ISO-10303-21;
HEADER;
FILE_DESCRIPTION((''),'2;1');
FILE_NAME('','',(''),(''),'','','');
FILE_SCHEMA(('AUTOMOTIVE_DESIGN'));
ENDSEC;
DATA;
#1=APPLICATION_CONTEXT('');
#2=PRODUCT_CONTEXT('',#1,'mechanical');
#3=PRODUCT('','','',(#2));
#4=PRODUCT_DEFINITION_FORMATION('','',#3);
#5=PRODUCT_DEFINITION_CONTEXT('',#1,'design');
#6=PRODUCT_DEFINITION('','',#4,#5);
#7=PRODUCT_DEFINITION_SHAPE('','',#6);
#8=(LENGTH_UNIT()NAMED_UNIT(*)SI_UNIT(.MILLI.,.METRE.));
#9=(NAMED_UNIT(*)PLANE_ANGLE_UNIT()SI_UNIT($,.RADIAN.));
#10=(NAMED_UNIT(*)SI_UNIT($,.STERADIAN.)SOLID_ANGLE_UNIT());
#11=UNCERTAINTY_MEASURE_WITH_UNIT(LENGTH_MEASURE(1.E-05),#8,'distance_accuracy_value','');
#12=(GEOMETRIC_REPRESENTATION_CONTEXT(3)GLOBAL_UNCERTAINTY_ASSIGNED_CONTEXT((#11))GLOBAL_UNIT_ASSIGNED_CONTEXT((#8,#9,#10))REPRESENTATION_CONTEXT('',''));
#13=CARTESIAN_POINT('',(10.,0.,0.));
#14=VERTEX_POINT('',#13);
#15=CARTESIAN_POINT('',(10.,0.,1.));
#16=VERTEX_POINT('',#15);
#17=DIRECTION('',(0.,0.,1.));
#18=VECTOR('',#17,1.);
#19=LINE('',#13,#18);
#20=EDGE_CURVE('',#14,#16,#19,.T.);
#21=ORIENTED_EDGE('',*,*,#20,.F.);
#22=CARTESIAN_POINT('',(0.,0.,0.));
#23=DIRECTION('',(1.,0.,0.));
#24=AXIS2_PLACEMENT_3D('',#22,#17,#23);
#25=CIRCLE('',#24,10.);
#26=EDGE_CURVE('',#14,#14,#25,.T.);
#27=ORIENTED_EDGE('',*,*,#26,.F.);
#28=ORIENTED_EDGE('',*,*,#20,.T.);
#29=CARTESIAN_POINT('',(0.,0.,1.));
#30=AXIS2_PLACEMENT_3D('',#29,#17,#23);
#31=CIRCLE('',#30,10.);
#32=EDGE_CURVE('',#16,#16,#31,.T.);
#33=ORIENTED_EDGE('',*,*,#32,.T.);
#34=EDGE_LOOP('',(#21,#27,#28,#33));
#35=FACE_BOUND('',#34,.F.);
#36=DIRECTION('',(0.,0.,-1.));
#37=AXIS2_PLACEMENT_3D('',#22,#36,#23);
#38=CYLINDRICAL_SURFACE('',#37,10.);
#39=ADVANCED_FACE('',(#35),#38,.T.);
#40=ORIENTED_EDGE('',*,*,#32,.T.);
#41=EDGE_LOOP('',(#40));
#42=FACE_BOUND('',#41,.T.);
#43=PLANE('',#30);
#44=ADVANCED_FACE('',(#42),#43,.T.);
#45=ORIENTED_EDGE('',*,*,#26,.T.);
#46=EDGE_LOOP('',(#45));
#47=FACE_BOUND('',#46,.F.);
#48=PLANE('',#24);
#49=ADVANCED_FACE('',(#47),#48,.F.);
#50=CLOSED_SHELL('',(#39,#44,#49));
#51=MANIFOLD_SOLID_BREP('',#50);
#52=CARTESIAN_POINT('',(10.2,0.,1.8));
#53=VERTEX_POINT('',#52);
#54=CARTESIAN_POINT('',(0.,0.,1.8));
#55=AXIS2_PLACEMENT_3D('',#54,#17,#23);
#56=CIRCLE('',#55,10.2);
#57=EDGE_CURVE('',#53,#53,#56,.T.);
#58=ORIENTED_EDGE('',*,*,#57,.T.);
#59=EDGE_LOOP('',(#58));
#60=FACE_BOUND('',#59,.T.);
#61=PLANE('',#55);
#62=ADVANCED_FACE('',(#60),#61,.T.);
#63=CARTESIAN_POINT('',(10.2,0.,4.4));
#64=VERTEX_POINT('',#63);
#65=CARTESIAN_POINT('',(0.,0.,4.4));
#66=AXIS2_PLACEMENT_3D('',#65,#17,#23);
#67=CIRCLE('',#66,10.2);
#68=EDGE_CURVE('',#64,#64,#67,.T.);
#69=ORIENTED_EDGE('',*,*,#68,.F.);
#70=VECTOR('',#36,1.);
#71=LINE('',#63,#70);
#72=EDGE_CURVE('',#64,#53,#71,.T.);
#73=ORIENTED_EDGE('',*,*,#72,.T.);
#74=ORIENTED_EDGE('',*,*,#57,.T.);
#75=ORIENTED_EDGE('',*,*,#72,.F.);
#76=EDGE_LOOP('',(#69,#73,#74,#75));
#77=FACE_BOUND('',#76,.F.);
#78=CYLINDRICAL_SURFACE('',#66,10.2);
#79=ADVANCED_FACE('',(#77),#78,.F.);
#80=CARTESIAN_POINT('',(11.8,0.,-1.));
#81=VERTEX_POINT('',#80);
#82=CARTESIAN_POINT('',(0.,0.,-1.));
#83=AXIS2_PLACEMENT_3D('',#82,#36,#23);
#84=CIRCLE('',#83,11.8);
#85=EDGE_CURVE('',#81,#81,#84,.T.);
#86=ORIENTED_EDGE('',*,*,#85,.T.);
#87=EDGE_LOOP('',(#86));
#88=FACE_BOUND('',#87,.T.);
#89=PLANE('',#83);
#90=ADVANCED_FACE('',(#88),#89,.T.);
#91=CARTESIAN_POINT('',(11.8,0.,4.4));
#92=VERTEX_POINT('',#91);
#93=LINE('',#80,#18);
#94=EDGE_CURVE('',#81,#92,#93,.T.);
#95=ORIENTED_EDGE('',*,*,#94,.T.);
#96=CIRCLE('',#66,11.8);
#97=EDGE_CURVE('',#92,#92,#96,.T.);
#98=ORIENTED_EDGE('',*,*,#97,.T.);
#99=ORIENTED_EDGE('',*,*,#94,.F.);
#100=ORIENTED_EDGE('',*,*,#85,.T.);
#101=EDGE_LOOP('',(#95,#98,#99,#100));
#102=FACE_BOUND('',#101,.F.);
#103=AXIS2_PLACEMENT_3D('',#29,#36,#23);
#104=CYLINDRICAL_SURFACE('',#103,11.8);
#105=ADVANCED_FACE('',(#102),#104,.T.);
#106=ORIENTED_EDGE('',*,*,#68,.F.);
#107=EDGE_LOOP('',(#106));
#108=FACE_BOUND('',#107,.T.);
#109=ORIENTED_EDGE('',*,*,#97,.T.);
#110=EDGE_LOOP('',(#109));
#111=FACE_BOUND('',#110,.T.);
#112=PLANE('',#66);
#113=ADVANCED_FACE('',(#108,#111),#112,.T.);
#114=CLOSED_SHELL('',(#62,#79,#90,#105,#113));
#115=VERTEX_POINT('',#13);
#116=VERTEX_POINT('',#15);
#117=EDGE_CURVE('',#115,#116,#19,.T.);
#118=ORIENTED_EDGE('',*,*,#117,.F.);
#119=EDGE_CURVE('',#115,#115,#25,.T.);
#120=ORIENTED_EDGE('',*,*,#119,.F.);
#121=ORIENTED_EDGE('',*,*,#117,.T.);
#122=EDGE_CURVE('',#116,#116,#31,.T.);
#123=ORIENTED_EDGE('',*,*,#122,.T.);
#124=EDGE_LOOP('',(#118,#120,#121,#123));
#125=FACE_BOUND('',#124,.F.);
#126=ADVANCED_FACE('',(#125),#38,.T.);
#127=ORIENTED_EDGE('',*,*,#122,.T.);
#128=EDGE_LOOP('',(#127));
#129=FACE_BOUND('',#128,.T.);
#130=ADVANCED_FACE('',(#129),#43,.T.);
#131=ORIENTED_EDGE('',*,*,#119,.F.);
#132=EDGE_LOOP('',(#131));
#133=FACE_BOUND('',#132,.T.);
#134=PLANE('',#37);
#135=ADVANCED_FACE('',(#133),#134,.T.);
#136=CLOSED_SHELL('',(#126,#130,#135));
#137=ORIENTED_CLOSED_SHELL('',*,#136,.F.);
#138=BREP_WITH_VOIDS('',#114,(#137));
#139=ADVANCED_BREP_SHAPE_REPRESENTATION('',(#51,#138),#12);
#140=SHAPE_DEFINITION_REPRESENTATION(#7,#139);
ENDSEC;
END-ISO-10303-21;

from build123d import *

# Parameters (mm, degrees)
F0_R     = 10
F1_DEPTH = 1
F2_R     = 11.8
F3_DEPTH = 1
F4_R     = 11.8
F4_R_2   = 10
F5_DEPTH = 1
F6_R     = 11.8
F7_DEPTH = 3.4
F8_R     = 10.2
F9_DEPTH = 2.6


with BuildPart() as f1:
    # F0 (on Top) → F1 (new body)
    with BuildSketch(Plane.XY):
        Circle(F0_R)
    extrude(amount=F1_DEPTH)


with BuildPart() as f3:
    # F2 (on face) → F3 (new body)
    with BuildSketch(Plane(origin=(0, 0, 0), x_dir=(1, 0, 0), z_dir=(0, 0, -1))):
        Circle(F2_R)
    extrude(amount=F3_DEPTH)

    # F4 (on face) → F5 (join)
    with BuildSketch(Plane.XY):
        Circle(F4_R)
        Circle(F4_R_2, mode=Mode.SUBTRACT)
    extrude(amount=F5_DEPTH)

    # F6 (on face) → F7 (join)
    with BuildSketch(Plane.XY.offset(1)):
        Circle(F6_R)
    extrude(amount=F7_DEPTH)

    # F8 (on face) → F9 (cut)
    with BuildSketch(Plane.XY.offset(4.4)):
        Circle(F8_R)
    extrude(amount=-F9_DEPTH, mode=Mode.SUBTRACT)


solid = Compound([f1.part, f3.part])
